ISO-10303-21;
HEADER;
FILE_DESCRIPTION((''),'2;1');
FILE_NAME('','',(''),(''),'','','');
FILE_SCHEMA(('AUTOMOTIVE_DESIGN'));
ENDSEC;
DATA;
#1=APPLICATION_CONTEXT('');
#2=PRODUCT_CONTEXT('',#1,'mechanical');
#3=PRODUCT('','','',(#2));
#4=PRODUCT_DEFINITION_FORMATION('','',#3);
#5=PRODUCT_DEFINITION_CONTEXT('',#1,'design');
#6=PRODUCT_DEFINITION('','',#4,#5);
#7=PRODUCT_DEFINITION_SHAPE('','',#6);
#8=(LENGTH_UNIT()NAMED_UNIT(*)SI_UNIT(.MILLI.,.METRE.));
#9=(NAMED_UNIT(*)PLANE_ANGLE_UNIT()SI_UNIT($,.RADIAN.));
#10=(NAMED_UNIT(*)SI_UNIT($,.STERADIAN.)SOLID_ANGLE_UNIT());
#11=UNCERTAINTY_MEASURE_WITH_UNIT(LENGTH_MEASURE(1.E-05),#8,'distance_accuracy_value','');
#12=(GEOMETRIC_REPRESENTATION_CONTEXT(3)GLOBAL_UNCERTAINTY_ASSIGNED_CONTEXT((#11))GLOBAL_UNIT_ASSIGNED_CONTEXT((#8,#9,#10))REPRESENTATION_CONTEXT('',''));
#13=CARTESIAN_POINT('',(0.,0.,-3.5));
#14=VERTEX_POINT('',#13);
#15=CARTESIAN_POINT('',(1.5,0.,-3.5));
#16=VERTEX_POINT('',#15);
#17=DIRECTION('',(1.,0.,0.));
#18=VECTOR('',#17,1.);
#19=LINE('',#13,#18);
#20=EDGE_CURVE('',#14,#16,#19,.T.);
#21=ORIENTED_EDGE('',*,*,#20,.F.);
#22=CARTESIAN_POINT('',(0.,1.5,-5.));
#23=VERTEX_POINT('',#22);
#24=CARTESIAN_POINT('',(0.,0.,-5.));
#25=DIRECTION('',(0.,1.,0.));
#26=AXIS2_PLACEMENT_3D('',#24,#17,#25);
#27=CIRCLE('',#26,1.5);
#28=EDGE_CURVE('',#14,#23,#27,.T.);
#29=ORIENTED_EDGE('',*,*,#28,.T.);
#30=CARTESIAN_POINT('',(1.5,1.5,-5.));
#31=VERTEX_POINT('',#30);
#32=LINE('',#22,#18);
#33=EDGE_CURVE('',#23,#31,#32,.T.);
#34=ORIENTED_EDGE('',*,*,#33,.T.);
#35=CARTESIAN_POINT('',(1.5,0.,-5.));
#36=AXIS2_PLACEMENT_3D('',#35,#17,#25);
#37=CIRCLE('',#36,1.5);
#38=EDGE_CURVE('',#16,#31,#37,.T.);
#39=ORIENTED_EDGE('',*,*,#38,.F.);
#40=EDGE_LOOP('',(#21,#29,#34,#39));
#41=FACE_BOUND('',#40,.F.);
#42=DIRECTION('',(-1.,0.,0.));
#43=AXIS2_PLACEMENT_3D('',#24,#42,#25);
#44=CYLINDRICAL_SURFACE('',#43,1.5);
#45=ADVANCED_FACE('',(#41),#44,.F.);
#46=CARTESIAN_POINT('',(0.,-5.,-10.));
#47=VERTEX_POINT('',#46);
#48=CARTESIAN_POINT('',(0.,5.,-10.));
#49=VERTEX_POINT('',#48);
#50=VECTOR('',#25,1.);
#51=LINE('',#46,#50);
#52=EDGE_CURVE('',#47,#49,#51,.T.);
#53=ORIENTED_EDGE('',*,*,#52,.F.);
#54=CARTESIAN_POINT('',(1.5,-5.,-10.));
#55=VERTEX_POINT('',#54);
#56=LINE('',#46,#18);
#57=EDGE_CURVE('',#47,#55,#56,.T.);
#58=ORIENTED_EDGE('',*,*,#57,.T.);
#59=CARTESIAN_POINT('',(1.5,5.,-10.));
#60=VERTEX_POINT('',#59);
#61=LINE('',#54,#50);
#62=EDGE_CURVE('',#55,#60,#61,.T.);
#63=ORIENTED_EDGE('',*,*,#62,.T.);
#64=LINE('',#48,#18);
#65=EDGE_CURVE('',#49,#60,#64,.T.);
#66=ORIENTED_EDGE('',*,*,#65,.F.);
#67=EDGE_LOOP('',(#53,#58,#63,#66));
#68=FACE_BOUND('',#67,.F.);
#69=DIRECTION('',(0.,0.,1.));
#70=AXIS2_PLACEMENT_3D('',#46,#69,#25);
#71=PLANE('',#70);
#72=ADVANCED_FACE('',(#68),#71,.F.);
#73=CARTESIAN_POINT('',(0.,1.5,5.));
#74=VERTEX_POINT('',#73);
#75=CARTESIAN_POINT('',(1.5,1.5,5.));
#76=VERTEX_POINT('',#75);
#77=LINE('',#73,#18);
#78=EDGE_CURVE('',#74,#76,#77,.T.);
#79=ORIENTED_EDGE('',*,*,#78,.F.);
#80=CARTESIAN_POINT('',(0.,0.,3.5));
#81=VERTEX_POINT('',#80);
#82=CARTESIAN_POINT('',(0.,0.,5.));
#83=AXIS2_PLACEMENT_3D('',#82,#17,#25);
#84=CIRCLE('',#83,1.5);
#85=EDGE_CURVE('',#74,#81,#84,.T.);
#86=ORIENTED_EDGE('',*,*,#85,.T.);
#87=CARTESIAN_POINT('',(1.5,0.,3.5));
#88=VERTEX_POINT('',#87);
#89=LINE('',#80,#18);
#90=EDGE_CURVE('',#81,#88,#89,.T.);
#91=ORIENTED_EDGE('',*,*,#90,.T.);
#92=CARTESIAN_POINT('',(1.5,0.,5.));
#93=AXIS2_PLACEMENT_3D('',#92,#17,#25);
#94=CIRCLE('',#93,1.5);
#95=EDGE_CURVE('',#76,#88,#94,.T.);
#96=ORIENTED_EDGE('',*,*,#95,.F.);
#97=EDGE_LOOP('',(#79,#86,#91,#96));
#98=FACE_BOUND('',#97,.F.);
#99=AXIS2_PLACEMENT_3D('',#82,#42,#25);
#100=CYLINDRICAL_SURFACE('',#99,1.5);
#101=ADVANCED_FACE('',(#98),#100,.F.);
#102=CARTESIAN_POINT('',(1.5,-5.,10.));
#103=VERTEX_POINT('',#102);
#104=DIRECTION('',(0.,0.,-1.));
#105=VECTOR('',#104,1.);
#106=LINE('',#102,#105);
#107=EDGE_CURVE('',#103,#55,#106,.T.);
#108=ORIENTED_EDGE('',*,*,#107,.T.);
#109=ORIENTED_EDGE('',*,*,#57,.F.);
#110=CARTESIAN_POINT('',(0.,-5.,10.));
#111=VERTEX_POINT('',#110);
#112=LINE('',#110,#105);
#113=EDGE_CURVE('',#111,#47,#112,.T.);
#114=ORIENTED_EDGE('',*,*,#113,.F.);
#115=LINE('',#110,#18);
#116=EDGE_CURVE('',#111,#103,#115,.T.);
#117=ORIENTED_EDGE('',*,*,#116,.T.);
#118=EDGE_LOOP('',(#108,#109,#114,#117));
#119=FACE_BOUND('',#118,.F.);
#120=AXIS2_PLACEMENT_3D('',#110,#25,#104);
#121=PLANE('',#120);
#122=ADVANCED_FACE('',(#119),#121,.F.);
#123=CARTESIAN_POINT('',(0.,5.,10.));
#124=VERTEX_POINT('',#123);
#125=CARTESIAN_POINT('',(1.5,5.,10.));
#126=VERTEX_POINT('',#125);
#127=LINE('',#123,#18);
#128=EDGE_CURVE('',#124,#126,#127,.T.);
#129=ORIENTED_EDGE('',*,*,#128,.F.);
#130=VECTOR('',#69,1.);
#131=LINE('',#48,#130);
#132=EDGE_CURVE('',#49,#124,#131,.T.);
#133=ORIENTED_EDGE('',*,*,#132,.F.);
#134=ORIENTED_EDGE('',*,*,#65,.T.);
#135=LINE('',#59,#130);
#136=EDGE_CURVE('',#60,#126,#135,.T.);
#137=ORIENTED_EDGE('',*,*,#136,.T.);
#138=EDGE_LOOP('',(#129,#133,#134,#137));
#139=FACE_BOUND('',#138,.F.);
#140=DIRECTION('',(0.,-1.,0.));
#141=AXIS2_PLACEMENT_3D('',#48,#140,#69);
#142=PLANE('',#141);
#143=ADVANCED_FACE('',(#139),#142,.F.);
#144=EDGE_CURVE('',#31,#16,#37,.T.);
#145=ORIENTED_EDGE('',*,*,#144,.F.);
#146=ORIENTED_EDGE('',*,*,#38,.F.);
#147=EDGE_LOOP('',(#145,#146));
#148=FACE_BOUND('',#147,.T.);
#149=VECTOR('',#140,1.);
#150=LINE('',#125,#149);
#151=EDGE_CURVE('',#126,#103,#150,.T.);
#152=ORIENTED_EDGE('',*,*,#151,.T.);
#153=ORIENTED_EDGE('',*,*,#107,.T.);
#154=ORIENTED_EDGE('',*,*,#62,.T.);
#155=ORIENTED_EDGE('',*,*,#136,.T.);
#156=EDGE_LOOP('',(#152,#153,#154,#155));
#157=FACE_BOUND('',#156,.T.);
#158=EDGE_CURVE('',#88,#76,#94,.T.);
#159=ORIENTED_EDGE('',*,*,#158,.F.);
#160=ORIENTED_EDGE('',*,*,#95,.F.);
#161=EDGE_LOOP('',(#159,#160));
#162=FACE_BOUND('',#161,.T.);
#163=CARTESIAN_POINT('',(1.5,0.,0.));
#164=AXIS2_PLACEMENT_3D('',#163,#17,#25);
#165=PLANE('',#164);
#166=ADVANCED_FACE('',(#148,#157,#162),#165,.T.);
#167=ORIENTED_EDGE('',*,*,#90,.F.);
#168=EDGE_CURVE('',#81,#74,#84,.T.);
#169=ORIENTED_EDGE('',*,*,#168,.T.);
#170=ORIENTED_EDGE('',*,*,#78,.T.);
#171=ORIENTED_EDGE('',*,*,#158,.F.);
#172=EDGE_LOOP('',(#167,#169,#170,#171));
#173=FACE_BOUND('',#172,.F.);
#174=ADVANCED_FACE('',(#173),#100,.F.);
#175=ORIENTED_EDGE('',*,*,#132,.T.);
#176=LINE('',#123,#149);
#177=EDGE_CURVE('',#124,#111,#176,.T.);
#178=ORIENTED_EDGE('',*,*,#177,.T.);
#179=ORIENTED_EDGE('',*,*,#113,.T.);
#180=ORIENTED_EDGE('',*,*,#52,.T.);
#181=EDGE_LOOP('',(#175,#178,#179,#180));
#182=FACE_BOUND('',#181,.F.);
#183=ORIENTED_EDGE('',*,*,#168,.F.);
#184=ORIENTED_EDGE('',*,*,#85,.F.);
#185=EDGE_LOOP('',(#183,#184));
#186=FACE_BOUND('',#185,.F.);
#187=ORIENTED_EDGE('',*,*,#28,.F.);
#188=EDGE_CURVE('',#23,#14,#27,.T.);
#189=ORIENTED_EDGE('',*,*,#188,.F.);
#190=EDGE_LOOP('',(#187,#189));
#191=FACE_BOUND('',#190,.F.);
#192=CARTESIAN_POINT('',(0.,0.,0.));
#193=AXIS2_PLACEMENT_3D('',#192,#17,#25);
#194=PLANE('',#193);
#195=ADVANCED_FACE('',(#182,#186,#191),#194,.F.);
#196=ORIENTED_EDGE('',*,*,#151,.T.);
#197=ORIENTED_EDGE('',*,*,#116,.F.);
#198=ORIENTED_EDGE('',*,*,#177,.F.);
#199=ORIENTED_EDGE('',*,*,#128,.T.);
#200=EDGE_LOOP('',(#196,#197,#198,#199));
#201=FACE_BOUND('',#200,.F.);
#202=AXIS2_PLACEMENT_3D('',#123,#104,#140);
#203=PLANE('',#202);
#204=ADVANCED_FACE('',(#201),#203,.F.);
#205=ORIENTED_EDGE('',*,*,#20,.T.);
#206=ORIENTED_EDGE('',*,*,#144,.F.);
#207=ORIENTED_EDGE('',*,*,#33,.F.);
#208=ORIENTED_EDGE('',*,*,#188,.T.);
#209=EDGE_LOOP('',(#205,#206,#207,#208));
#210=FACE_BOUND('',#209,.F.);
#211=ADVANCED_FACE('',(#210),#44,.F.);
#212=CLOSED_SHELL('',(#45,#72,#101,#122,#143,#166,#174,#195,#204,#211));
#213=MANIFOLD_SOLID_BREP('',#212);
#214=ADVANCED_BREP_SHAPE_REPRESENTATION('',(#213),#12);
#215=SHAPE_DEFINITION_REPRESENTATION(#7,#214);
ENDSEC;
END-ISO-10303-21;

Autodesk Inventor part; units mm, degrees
ref_plane "YZ Plane" through (0, 0, 0) normal (1, 0, 0) x (0, 1, 0)
ref_plane "XZ Plane" through (0, 0, 0) normal (0, 1, 0) x (-1, 0, 0)
ref_plane "XY Plane" through (0, 0, 0) normal (0, 0, 1) x (1, 0, 0)
sketch "Sketch1" plane through (0, 0, 0) normal (1, 0, 0) x (0, 1, 0)
  line L0 (5, 10) -> (-5, 10)
  line L1 (-5, 10) -> (-5, -10)
  line L2 (-5, -10) -> (5, -10)
  line L3 (5, -10) -> (5, 10)
  line L4 (5, 10) -> (-5, -10) construction
  line L5 (-5, 10) -> (5, -10) construction
  line L6 (0, 0) -> (0, -5)
  line L7 (0, -5) -> (0, 5)
  circle A0 centre (0, 5) radius 1.5
  circle A1 centre (0, -5) radius 1.5
  dimension "d0" = 10
  dimension "d1" = 20
  dimension "d2" = 5
  dimension "d3" = 10
  dimension "d4" = 3
  dimension "d5" = 3
extrude "Extrusion1" add sketch "Sketch1" along normal blind 1.5
properties part number "kundi"
